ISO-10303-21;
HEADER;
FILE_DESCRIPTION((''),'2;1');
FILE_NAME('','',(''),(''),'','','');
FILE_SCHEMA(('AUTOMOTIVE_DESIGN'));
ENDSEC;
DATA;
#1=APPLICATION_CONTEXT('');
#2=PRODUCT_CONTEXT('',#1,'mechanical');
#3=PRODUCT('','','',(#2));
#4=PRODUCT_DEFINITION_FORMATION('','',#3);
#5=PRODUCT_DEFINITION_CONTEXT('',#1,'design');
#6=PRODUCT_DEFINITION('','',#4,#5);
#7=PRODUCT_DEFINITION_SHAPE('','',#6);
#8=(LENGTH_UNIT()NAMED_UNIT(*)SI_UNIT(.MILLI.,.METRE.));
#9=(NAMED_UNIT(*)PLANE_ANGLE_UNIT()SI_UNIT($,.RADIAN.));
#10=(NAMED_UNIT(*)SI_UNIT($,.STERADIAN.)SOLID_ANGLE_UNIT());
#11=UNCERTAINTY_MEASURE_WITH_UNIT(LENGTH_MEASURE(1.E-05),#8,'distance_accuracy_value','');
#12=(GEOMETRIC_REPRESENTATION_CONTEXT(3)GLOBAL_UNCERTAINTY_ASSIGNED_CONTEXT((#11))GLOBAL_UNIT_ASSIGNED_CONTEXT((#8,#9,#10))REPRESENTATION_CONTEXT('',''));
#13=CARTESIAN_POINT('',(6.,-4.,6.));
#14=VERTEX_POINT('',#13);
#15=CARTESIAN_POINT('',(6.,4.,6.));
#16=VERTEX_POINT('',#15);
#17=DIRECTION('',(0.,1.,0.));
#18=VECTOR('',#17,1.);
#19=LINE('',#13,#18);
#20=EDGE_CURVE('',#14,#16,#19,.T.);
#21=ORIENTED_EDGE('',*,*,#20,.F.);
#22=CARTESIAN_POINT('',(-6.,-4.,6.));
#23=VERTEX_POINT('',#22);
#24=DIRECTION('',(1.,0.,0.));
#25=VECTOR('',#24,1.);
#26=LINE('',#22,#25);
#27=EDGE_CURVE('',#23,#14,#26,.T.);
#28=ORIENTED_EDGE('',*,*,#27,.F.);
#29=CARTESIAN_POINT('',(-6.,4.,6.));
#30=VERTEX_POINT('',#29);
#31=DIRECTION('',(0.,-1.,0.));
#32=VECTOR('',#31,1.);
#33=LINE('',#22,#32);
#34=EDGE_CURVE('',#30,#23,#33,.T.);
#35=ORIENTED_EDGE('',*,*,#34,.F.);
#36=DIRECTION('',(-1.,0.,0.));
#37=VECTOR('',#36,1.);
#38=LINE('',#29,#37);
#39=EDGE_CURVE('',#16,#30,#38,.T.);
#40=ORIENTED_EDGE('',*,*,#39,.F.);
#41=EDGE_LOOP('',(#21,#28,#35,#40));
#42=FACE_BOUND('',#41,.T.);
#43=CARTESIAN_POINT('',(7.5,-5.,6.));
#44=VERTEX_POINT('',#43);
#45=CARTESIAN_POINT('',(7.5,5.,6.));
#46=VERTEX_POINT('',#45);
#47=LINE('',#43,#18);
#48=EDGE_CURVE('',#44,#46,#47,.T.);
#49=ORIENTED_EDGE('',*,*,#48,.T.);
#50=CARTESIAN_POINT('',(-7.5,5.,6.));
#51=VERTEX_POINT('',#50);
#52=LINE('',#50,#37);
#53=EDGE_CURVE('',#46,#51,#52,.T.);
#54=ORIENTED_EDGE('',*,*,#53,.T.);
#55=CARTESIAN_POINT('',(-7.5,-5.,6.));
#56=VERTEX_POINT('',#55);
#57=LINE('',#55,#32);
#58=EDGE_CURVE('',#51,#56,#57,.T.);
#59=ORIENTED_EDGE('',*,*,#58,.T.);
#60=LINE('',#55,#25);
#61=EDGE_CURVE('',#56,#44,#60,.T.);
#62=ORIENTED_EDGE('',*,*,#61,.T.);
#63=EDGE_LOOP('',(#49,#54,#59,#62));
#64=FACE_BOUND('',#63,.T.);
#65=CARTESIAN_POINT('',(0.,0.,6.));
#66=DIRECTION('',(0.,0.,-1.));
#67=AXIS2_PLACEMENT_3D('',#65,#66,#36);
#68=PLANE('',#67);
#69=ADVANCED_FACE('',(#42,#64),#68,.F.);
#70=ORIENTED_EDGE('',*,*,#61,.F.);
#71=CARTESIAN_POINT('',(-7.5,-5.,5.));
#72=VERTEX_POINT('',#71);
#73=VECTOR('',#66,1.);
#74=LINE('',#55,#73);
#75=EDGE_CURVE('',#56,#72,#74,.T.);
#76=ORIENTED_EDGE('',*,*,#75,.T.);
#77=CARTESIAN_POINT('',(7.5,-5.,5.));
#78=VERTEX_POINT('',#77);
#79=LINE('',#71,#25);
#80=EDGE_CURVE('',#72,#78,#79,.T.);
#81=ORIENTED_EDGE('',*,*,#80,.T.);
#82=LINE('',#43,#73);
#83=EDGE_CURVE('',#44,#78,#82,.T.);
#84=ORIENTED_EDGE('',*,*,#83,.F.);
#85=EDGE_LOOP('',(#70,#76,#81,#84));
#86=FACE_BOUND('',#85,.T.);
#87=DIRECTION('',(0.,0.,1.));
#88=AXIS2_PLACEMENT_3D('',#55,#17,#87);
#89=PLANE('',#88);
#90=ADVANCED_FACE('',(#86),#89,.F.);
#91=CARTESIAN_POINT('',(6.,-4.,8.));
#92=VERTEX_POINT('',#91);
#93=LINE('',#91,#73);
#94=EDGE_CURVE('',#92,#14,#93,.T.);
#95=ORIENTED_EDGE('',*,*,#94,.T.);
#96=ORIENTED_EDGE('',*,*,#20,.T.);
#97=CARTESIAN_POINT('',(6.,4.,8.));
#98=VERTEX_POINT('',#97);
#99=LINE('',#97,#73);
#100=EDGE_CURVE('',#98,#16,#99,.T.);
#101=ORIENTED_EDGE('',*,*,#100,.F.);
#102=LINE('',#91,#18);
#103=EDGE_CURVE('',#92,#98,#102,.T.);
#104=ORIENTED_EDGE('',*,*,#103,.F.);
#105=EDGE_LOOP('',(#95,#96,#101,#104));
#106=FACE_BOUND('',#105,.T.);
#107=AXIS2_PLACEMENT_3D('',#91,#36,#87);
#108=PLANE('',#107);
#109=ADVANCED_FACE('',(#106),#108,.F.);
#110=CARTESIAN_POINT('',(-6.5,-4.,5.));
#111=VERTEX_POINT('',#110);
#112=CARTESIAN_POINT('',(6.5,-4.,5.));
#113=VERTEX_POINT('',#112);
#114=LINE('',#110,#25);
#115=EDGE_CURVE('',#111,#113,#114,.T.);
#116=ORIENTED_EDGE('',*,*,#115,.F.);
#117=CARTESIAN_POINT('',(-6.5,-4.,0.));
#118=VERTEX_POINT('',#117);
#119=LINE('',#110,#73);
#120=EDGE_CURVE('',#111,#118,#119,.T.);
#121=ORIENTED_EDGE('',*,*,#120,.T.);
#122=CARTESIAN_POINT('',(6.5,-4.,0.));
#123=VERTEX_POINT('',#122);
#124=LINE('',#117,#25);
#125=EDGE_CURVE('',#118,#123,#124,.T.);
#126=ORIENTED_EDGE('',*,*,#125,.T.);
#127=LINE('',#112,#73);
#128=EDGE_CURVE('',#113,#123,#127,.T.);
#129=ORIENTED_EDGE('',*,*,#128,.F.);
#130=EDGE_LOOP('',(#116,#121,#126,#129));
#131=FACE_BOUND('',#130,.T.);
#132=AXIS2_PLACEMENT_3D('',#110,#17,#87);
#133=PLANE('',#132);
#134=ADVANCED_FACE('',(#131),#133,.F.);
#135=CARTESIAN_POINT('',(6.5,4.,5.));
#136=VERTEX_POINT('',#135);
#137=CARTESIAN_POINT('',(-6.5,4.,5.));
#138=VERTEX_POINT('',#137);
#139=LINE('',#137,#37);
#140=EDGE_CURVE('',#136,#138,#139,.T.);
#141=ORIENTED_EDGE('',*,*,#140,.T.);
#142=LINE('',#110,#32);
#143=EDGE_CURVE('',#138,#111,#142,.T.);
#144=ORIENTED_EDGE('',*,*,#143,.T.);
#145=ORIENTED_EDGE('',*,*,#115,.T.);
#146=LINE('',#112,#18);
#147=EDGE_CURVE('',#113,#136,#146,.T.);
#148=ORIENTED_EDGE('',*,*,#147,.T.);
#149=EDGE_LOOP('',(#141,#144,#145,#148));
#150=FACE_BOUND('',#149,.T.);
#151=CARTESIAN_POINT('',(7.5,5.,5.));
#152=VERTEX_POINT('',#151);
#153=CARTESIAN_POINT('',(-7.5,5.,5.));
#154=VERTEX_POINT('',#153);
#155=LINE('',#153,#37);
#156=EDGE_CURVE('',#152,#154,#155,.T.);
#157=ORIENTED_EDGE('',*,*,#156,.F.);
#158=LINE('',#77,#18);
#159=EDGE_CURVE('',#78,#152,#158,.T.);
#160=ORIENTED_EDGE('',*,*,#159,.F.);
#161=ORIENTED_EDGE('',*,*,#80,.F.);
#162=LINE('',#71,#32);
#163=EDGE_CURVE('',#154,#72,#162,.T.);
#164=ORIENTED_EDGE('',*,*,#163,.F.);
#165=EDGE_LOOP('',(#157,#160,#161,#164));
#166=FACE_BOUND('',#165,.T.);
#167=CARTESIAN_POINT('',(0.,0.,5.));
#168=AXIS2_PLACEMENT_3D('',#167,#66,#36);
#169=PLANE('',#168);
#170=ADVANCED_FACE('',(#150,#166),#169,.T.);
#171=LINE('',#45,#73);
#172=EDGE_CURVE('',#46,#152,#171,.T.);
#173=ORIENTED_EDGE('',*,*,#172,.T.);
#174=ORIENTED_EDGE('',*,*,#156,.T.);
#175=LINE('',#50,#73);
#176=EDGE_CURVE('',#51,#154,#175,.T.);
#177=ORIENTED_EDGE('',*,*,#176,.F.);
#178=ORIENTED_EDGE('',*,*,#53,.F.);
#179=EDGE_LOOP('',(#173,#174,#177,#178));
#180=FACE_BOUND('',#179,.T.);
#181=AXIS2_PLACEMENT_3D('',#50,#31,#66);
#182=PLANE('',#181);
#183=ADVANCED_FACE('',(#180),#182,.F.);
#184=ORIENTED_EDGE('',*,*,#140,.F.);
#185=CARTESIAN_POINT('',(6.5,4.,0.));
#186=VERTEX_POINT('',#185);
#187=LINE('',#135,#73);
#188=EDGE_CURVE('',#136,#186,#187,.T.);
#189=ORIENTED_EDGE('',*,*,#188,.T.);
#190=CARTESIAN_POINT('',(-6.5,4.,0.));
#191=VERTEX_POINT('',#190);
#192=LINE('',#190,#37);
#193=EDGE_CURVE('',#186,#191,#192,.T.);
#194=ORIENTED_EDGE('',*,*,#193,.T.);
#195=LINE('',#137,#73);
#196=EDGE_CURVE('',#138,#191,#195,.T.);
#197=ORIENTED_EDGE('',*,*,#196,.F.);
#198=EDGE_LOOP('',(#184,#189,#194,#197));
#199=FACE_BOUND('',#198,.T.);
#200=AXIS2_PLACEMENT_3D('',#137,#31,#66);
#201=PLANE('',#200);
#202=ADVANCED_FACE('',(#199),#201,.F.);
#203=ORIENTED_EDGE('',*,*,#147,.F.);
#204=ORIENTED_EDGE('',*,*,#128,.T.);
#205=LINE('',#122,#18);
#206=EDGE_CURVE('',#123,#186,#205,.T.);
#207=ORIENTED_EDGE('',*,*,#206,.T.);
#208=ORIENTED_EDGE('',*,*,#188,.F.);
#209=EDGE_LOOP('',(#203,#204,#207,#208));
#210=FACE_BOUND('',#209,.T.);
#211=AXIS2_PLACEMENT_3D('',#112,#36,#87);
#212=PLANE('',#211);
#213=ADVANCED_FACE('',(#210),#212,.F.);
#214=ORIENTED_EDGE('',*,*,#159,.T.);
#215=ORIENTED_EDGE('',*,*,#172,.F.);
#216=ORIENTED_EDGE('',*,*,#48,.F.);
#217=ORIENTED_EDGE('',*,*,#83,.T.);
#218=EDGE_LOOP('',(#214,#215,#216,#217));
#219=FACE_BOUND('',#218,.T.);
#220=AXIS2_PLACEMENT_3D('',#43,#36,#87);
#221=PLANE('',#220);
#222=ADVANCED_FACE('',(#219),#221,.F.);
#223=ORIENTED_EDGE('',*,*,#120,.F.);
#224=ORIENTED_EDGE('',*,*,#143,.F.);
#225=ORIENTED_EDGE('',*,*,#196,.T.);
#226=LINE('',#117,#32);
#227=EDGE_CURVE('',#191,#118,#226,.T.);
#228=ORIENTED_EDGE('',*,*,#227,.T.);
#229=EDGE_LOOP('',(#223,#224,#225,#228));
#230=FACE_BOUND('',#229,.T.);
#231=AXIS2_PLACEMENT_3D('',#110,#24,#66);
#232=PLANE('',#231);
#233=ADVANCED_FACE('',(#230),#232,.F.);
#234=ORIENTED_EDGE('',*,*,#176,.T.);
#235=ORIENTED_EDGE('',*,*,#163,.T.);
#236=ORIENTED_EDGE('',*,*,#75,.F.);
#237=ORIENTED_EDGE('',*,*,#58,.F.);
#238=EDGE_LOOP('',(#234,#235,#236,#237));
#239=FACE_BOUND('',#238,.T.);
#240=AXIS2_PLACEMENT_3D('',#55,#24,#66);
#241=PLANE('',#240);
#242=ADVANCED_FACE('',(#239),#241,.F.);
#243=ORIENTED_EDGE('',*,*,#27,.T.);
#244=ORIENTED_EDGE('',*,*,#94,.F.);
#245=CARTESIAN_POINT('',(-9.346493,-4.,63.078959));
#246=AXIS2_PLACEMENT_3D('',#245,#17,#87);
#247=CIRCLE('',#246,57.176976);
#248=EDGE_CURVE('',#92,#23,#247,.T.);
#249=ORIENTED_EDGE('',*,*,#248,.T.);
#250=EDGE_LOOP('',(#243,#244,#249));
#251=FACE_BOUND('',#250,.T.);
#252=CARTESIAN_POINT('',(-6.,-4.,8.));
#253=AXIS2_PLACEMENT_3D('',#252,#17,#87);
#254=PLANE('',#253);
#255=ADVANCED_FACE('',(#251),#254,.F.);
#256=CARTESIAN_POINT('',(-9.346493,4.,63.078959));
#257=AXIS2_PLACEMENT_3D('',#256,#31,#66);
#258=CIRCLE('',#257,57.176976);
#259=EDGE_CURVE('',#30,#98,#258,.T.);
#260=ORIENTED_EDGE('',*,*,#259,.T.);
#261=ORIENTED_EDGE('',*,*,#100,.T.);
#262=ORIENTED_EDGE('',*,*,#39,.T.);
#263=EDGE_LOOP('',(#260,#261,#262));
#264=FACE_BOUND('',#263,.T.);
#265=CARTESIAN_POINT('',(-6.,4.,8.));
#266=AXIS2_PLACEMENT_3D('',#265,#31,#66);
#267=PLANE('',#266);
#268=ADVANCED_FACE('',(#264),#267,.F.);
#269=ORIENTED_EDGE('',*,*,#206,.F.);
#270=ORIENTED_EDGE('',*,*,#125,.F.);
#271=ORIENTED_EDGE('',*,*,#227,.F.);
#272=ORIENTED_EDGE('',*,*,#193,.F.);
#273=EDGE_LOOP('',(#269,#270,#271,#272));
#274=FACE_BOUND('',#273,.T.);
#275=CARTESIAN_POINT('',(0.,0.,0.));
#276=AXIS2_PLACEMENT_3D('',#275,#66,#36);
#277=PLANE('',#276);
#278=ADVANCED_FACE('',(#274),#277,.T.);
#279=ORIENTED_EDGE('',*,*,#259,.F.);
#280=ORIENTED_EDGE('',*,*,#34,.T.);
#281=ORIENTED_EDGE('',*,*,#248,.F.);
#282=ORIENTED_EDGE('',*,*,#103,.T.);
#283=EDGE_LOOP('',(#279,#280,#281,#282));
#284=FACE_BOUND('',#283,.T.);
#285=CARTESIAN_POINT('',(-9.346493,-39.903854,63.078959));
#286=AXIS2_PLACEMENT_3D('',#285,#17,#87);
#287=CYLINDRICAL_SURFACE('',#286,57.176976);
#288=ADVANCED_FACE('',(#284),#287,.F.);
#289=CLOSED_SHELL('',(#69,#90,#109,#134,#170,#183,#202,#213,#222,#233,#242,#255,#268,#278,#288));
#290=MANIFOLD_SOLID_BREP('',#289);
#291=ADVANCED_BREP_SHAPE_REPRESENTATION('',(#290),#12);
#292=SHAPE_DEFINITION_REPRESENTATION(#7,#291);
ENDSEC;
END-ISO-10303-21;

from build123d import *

# Parameters (mm, degrees)
ESBO_O1_W                = 13
ESBO_O1_H                = 8
RESSALTO_EXTRUS_O1_DEPTH = 5
ESBO_O2_W                = 15
ESBO_O2_H                = 10
RESSALTO_EXTRUS_O2_DEPTH = 1
ESBO_O3_W                = 12
ESBO_O3_H                = 8
RESSALTO_EXTRUS_O3_DEPTH = 2
CORTE_EXTRUS_O1_START    = -8
CORTE_EXTRUS_O1_DEPTH    = 8


# Read off the part's stored shape, not the designer's step: Corte-extrusão1
with BuildPart() as part:
    # Esboço1 → Ressalto-extrusão1 (new body)
    with BuildSketch(Plane.XY):
        Rectangle(ESBO_O1_W, ESBO_O1_H)
    extrude(amount=RESSALTO_EXTRUS_O1_DEPTH)

    # Esboço2 → Ressalto-extrusão2 (add)
    with BuildSketch(Plane.XY.offset(5)):
        Rectangle(ESBO_O2_W, ESBO_O2_H)
    extrude(amount=RESSALTO_EXTRUS_O2_DEPTH)

    # Esboço3 → Ressalto-extrusão3 (add)
    with BuildSketch(Plane.XY.offset(6)):
        Rectangle(ESBO_O3_W, ESBO_O3_H)
    extrude(amount=RESSALTO_EXTRUS_O3_DEPTH)

    # Corte-extrusão1 outline → Corte-extrusão1 (cut)
    with BuildSketch(Plane.XZ.offset(4).offset(CORTE_EXTRUS_O1_START)):
        with BuildLine():
            ThreePointArc((-6, 6), (0.053343774, 6.679937356), (6, 8))
            Line((6, 8), (-6, 8))
            Line((-6, 8), (-6, 6))
        make_face()
    extrude(amount=CORTE_EXTRUS_O1_DEPTH, mode=Mode.SUBTRACT)


solid = part.part
